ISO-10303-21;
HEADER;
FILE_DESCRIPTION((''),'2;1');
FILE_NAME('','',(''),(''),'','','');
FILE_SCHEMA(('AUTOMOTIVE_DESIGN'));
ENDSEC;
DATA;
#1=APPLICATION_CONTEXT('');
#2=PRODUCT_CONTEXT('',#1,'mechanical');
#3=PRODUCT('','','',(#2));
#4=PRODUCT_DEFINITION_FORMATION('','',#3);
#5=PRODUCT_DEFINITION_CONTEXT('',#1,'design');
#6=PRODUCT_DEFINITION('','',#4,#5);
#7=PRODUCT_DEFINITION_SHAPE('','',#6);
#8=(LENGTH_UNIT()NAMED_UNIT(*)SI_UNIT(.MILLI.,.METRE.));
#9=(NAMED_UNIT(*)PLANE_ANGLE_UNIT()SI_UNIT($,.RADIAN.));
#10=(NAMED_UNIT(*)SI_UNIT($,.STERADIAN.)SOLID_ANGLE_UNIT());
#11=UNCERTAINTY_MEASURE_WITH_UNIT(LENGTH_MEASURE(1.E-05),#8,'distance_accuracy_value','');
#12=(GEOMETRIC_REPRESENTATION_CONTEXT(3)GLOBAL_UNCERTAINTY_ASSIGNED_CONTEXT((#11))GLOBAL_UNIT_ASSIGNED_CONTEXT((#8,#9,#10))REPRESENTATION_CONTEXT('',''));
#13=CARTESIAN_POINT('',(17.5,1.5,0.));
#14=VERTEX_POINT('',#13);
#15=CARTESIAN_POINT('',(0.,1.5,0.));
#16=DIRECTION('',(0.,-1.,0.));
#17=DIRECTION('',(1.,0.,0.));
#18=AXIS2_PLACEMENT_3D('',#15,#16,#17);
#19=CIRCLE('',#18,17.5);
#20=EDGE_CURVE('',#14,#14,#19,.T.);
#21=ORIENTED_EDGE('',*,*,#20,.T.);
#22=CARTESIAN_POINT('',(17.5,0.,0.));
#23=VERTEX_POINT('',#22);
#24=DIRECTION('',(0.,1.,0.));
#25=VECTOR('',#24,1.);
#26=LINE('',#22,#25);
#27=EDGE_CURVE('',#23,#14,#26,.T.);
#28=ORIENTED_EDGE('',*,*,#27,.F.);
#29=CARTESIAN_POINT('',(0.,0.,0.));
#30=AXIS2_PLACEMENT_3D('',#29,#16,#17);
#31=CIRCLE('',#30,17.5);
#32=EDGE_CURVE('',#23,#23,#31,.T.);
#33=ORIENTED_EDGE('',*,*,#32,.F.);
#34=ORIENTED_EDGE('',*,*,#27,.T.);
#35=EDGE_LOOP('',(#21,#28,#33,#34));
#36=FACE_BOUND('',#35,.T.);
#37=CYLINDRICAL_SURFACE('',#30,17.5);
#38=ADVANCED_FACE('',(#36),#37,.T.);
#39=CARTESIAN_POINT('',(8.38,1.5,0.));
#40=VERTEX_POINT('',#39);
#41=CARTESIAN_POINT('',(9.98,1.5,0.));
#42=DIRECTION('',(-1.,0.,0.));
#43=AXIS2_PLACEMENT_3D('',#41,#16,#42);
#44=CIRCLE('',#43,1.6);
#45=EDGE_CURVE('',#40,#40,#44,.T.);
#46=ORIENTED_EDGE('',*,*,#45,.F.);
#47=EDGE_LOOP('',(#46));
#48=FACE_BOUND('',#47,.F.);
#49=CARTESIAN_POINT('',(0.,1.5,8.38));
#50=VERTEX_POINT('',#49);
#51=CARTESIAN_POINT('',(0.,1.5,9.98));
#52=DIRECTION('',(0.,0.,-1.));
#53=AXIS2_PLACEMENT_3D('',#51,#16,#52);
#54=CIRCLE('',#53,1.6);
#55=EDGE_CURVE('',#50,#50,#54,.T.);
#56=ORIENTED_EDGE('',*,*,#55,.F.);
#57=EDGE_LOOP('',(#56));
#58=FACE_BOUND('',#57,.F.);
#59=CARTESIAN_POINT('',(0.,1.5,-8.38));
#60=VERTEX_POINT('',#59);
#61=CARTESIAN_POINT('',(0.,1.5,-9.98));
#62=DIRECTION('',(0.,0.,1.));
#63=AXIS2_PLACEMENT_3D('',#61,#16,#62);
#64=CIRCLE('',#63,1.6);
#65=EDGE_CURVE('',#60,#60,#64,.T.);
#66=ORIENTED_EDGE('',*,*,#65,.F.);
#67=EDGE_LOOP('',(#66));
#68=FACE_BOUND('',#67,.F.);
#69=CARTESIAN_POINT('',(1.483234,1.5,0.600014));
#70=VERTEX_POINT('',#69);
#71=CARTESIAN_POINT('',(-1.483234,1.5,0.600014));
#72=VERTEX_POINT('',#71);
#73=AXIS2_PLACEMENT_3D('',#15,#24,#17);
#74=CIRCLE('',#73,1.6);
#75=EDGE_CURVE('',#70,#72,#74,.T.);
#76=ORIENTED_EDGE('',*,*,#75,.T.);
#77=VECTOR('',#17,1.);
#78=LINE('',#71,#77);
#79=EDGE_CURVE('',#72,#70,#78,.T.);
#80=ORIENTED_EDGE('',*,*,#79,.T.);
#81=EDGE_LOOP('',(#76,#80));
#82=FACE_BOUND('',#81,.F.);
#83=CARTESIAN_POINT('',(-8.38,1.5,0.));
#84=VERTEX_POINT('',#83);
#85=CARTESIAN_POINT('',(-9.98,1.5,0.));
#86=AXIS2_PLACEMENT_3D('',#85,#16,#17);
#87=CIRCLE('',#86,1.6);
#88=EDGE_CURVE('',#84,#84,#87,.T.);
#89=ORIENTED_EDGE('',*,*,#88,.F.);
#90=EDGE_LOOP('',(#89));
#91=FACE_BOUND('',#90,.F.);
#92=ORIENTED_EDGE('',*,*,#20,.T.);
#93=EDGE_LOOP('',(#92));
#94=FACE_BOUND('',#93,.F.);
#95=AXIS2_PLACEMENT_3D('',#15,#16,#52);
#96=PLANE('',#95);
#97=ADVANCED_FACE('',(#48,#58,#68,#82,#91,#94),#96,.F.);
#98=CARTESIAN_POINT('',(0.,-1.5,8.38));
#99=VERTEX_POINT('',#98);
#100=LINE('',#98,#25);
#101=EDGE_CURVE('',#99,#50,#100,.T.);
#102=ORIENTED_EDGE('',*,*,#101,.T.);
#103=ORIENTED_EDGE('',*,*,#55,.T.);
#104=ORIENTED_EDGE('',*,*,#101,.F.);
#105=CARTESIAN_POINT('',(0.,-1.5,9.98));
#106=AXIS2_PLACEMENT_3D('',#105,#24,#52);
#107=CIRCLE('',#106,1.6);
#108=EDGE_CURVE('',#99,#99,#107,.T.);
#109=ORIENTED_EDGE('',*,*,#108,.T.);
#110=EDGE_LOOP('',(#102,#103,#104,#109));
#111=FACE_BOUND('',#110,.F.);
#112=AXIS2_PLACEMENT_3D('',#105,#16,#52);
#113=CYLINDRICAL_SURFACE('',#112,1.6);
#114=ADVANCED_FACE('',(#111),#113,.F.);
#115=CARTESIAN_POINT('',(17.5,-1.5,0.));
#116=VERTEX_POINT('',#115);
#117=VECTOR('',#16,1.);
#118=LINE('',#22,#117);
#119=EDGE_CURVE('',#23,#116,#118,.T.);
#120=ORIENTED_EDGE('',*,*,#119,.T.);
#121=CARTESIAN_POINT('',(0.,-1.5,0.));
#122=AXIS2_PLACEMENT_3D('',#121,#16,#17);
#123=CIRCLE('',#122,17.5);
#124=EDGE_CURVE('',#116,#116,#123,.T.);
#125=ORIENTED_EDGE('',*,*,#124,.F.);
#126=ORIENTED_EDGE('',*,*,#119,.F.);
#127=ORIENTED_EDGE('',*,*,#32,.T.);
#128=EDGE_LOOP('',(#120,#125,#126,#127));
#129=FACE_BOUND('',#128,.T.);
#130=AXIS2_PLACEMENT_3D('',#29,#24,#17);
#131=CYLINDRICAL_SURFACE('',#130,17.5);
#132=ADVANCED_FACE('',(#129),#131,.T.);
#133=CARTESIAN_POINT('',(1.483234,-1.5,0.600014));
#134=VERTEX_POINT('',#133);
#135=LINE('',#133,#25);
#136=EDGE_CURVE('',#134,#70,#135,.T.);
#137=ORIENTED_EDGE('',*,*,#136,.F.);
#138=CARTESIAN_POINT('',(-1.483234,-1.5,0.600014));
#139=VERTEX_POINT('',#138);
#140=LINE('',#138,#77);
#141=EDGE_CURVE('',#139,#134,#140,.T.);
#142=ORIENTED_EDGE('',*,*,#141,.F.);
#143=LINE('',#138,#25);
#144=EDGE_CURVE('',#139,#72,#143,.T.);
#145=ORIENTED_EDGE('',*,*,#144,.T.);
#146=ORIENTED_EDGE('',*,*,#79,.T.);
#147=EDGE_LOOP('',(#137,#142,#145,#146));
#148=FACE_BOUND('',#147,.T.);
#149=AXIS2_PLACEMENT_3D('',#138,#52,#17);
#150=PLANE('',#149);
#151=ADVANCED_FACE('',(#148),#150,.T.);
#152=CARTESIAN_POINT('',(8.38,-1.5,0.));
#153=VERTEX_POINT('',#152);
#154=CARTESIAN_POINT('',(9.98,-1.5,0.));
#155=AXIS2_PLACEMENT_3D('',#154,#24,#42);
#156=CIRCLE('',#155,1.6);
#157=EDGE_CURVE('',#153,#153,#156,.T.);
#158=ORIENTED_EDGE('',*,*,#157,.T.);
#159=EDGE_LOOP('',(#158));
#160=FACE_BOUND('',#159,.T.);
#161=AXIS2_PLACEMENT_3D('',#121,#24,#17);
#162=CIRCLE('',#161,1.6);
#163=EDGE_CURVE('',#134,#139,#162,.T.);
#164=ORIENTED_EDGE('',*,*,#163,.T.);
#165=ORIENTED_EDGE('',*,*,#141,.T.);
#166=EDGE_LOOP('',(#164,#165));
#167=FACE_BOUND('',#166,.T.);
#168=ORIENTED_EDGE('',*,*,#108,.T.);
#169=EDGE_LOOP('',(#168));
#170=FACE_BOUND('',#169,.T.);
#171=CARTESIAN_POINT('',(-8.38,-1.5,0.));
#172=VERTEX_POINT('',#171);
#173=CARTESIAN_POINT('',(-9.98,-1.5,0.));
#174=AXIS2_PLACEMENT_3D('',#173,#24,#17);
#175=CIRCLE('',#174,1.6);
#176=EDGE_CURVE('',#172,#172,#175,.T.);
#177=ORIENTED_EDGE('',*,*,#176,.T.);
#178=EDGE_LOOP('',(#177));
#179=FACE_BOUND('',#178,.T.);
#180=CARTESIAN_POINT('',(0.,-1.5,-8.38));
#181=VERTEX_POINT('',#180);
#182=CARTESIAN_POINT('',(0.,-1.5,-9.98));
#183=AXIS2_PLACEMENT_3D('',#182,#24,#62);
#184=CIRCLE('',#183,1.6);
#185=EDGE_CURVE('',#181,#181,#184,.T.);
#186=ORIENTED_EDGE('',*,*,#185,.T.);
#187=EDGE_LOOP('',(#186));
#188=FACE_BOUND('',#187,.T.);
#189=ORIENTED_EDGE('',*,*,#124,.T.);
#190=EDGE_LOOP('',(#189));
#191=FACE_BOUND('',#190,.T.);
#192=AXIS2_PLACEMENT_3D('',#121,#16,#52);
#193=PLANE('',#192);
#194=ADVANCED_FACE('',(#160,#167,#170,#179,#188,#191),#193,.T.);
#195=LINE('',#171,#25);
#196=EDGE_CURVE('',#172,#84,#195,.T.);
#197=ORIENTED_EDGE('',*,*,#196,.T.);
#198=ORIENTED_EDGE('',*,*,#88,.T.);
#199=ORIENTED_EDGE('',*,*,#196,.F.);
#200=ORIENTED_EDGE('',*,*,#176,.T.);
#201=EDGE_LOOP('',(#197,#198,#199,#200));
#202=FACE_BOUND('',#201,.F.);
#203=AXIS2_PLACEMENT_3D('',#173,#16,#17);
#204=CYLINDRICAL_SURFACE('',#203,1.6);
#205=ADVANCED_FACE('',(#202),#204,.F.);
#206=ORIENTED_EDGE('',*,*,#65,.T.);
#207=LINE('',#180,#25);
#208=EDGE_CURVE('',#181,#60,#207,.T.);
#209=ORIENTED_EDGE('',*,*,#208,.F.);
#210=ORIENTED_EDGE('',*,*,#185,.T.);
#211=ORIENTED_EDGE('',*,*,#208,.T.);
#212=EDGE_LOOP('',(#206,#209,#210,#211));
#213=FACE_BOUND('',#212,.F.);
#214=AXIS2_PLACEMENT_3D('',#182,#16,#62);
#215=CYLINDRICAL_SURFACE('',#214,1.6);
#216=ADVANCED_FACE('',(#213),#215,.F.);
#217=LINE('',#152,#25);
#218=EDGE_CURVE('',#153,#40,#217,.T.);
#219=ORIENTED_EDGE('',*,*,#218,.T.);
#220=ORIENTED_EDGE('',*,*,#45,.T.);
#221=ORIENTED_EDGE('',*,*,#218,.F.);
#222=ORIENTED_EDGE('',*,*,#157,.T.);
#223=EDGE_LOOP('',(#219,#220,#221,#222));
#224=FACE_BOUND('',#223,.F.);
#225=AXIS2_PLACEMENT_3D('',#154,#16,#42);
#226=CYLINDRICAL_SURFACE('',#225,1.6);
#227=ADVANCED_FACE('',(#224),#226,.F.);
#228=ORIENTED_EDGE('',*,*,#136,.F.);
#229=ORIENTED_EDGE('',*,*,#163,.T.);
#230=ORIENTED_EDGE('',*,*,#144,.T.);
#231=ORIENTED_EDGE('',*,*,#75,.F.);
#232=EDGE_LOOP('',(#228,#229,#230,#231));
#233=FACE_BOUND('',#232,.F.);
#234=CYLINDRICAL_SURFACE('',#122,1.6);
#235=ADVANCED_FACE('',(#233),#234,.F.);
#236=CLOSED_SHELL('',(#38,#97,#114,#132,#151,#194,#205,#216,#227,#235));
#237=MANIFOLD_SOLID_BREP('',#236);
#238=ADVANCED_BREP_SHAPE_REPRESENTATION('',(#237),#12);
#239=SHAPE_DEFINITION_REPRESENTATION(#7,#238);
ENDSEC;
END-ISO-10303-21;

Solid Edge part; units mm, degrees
sketch "Sketch1" plane through (0, 0, 0) normal (0, -1, 0) x (1, 0, 0)
  circle A0 centre (0, 0) radius 17.5
extrude "Protrusion1" add sketch "Sketch1" along normal mid plane 3
sketch "Sketch2" plane through (0, -1.5, 0) normal (0, -1, 0) x (1, 0, 0)
  line L0 (-1.4832, 0.6) -> (1.4832, 0.6)
  arc A0 (1.4832, 0.6) -> (-1.4832, 0.6) centre (0, 0) cw
extrude "Cutout1" cut sketch "Sketch2" against normal up to vertex (3 mm away)
hole "Agujero_1" at (0, -1.5, 9.98) direction (0, 1, 0) diameter 3.2 end up to next
pattern_circular "Pattern1" count 4 over 360 about axis through (0, -1.5, 0) along (0, 1, 0) of "Agujero_1"
